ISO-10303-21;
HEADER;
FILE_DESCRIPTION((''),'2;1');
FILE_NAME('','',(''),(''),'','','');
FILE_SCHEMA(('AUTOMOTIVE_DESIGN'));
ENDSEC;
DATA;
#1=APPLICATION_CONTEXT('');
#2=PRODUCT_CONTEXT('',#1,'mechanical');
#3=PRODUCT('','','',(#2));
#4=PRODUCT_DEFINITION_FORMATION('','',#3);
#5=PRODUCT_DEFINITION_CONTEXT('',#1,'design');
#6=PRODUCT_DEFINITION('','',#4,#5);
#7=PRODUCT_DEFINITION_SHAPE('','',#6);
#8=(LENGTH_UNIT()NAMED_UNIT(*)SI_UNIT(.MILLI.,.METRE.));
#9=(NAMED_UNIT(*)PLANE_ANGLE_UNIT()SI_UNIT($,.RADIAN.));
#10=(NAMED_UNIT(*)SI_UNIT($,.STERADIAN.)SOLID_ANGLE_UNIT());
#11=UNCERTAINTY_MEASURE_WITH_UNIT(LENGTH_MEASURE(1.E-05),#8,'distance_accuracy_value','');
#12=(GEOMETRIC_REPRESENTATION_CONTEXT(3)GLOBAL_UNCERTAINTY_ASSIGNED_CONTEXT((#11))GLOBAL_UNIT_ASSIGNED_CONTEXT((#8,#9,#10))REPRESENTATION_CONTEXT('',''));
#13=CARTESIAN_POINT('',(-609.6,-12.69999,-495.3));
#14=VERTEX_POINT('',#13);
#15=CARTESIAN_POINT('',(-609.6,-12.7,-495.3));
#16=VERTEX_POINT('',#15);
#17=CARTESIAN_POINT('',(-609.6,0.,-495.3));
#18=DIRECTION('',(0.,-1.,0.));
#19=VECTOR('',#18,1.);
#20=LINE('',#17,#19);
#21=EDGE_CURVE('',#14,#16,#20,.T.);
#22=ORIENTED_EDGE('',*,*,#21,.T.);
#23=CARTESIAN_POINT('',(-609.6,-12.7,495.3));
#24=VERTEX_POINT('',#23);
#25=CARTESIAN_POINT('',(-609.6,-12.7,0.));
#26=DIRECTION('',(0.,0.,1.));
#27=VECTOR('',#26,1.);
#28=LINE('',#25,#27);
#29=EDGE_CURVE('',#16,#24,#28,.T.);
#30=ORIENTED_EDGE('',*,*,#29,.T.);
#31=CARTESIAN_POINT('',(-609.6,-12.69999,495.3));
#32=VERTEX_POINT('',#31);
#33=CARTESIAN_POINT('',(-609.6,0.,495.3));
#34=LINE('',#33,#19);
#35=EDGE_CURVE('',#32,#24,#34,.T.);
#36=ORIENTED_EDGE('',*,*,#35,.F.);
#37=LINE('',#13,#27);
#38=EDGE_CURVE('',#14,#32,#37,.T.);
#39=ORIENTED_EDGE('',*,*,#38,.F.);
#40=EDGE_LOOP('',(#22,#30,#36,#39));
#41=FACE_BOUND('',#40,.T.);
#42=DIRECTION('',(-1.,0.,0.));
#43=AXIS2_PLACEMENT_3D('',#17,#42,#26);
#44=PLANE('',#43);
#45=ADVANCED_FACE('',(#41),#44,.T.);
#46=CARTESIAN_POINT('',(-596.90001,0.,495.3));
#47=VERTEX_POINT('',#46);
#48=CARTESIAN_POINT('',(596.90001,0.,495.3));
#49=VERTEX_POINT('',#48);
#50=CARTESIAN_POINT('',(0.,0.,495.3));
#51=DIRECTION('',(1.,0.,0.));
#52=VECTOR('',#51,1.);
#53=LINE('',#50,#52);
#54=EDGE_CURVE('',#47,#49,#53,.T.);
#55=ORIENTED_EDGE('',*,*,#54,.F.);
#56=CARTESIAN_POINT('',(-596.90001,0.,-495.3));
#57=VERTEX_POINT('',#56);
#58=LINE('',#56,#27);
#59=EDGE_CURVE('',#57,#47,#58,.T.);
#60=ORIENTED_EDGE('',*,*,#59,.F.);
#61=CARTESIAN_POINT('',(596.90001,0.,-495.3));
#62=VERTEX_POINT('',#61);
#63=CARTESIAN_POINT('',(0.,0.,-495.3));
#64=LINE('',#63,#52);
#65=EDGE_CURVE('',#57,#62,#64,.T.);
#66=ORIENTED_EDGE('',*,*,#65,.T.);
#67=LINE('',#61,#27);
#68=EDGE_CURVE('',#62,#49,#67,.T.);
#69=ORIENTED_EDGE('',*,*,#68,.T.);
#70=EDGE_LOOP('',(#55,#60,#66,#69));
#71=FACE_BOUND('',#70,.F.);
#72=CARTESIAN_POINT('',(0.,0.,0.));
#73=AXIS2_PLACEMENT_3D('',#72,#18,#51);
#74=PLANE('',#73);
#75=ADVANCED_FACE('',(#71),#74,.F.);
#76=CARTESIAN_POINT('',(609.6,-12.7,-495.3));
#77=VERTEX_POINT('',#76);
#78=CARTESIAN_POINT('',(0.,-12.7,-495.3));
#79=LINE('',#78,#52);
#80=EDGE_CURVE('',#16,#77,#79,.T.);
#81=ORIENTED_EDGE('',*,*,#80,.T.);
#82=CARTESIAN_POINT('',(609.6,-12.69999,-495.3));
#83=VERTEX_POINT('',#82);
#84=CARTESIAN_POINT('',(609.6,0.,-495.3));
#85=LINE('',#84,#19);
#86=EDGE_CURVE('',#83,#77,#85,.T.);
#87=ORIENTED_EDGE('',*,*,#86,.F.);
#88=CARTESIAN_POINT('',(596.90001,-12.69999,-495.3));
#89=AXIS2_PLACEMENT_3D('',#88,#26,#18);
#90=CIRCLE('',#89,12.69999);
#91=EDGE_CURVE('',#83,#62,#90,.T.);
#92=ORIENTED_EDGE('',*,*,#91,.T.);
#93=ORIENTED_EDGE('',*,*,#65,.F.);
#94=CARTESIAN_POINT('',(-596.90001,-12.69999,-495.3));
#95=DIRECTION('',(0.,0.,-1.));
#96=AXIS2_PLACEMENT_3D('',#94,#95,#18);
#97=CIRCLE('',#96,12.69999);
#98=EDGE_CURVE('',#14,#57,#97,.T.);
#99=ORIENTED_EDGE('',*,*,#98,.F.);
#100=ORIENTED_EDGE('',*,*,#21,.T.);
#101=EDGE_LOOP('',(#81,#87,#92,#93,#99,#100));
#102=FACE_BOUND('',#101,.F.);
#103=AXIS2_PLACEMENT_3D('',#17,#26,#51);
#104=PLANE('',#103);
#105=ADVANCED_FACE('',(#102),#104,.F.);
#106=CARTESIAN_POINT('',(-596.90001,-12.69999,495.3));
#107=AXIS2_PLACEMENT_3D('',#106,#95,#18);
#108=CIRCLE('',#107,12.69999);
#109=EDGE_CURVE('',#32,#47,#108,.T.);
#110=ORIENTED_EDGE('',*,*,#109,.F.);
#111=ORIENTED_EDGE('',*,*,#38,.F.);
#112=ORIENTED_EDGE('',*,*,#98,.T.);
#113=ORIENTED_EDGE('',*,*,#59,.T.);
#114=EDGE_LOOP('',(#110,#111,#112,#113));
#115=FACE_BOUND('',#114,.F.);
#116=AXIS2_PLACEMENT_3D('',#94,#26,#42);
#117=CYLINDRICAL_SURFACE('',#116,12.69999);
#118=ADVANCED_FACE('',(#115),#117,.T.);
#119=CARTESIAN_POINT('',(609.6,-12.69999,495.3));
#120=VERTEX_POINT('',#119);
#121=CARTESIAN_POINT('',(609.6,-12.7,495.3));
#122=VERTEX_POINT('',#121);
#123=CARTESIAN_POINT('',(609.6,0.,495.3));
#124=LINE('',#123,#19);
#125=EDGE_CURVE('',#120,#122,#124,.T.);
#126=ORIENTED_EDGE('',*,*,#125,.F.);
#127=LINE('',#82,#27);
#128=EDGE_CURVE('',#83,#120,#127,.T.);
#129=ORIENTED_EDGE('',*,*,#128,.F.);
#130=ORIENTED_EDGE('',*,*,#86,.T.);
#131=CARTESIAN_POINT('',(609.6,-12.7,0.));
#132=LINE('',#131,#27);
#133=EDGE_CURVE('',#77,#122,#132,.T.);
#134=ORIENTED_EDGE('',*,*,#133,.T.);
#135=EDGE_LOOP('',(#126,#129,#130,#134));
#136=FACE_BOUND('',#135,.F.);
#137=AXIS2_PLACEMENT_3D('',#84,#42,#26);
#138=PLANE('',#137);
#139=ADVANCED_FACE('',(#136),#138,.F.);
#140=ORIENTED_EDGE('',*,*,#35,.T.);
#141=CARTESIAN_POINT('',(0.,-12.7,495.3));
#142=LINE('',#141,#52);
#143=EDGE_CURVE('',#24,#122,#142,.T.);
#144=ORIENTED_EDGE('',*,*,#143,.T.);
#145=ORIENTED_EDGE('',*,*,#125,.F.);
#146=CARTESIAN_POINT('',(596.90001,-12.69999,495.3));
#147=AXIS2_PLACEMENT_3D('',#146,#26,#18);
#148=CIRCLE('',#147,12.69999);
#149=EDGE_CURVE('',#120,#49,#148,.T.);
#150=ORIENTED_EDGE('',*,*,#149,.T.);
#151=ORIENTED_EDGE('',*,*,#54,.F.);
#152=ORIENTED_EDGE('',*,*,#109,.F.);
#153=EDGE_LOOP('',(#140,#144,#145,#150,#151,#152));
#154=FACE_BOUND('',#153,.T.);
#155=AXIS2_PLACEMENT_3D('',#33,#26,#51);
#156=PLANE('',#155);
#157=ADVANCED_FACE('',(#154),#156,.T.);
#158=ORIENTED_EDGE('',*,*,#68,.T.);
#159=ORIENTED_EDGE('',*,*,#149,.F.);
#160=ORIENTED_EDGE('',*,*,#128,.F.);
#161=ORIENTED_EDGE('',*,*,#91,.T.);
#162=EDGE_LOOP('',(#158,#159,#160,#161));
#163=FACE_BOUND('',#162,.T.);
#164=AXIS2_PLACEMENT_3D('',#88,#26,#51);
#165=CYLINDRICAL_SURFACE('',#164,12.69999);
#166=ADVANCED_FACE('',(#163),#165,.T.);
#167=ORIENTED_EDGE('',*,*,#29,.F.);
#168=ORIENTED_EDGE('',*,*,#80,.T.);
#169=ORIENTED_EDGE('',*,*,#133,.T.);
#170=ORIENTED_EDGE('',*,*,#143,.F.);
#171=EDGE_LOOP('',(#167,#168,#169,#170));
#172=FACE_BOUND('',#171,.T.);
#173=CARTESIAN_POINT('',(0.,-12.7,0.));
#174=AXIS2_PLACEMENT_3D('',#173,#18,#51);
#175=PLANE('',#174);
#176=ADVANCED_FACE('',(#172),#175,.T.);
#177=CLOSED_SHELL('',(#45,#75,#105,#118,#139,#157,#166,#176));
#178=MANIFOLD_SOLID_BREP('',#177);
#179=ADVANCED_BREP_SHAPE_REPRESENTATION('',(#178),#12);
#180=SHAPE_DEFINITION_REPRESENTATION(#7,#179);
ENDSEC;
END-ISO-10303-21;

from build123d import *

# Parameters (mm, degrees)
F0_W     = 1219.2
F0_H     = 990.6
F1_DEPTH = 12.7
F2_R     = 12.69999


# Not quite as in the source:
# - a fillet or chamfer is up to 0.001 mm smaller than in the source, because OpenCascade refuses the exact size


with BuildPart() as f1:
    # F0 (on Front) → F1 (new body)
    with BuildSketch(Plane.XZ):
        Rectangle(F0_W, F0_H)
    extrude(amount=F1_DEPTH)

    # F2 (radius 12.7 in the source; OpenCascade refuses exactly that, so slightly less here)
    f2_edges = [f1.edges().sort_by_distance(p)[0] for p in [
        (609.6, 0, 0),
        (-609.6, 0, 0),
    ]]
    fillet(f2_edges, radius=F2_R)


solid = f1.part
